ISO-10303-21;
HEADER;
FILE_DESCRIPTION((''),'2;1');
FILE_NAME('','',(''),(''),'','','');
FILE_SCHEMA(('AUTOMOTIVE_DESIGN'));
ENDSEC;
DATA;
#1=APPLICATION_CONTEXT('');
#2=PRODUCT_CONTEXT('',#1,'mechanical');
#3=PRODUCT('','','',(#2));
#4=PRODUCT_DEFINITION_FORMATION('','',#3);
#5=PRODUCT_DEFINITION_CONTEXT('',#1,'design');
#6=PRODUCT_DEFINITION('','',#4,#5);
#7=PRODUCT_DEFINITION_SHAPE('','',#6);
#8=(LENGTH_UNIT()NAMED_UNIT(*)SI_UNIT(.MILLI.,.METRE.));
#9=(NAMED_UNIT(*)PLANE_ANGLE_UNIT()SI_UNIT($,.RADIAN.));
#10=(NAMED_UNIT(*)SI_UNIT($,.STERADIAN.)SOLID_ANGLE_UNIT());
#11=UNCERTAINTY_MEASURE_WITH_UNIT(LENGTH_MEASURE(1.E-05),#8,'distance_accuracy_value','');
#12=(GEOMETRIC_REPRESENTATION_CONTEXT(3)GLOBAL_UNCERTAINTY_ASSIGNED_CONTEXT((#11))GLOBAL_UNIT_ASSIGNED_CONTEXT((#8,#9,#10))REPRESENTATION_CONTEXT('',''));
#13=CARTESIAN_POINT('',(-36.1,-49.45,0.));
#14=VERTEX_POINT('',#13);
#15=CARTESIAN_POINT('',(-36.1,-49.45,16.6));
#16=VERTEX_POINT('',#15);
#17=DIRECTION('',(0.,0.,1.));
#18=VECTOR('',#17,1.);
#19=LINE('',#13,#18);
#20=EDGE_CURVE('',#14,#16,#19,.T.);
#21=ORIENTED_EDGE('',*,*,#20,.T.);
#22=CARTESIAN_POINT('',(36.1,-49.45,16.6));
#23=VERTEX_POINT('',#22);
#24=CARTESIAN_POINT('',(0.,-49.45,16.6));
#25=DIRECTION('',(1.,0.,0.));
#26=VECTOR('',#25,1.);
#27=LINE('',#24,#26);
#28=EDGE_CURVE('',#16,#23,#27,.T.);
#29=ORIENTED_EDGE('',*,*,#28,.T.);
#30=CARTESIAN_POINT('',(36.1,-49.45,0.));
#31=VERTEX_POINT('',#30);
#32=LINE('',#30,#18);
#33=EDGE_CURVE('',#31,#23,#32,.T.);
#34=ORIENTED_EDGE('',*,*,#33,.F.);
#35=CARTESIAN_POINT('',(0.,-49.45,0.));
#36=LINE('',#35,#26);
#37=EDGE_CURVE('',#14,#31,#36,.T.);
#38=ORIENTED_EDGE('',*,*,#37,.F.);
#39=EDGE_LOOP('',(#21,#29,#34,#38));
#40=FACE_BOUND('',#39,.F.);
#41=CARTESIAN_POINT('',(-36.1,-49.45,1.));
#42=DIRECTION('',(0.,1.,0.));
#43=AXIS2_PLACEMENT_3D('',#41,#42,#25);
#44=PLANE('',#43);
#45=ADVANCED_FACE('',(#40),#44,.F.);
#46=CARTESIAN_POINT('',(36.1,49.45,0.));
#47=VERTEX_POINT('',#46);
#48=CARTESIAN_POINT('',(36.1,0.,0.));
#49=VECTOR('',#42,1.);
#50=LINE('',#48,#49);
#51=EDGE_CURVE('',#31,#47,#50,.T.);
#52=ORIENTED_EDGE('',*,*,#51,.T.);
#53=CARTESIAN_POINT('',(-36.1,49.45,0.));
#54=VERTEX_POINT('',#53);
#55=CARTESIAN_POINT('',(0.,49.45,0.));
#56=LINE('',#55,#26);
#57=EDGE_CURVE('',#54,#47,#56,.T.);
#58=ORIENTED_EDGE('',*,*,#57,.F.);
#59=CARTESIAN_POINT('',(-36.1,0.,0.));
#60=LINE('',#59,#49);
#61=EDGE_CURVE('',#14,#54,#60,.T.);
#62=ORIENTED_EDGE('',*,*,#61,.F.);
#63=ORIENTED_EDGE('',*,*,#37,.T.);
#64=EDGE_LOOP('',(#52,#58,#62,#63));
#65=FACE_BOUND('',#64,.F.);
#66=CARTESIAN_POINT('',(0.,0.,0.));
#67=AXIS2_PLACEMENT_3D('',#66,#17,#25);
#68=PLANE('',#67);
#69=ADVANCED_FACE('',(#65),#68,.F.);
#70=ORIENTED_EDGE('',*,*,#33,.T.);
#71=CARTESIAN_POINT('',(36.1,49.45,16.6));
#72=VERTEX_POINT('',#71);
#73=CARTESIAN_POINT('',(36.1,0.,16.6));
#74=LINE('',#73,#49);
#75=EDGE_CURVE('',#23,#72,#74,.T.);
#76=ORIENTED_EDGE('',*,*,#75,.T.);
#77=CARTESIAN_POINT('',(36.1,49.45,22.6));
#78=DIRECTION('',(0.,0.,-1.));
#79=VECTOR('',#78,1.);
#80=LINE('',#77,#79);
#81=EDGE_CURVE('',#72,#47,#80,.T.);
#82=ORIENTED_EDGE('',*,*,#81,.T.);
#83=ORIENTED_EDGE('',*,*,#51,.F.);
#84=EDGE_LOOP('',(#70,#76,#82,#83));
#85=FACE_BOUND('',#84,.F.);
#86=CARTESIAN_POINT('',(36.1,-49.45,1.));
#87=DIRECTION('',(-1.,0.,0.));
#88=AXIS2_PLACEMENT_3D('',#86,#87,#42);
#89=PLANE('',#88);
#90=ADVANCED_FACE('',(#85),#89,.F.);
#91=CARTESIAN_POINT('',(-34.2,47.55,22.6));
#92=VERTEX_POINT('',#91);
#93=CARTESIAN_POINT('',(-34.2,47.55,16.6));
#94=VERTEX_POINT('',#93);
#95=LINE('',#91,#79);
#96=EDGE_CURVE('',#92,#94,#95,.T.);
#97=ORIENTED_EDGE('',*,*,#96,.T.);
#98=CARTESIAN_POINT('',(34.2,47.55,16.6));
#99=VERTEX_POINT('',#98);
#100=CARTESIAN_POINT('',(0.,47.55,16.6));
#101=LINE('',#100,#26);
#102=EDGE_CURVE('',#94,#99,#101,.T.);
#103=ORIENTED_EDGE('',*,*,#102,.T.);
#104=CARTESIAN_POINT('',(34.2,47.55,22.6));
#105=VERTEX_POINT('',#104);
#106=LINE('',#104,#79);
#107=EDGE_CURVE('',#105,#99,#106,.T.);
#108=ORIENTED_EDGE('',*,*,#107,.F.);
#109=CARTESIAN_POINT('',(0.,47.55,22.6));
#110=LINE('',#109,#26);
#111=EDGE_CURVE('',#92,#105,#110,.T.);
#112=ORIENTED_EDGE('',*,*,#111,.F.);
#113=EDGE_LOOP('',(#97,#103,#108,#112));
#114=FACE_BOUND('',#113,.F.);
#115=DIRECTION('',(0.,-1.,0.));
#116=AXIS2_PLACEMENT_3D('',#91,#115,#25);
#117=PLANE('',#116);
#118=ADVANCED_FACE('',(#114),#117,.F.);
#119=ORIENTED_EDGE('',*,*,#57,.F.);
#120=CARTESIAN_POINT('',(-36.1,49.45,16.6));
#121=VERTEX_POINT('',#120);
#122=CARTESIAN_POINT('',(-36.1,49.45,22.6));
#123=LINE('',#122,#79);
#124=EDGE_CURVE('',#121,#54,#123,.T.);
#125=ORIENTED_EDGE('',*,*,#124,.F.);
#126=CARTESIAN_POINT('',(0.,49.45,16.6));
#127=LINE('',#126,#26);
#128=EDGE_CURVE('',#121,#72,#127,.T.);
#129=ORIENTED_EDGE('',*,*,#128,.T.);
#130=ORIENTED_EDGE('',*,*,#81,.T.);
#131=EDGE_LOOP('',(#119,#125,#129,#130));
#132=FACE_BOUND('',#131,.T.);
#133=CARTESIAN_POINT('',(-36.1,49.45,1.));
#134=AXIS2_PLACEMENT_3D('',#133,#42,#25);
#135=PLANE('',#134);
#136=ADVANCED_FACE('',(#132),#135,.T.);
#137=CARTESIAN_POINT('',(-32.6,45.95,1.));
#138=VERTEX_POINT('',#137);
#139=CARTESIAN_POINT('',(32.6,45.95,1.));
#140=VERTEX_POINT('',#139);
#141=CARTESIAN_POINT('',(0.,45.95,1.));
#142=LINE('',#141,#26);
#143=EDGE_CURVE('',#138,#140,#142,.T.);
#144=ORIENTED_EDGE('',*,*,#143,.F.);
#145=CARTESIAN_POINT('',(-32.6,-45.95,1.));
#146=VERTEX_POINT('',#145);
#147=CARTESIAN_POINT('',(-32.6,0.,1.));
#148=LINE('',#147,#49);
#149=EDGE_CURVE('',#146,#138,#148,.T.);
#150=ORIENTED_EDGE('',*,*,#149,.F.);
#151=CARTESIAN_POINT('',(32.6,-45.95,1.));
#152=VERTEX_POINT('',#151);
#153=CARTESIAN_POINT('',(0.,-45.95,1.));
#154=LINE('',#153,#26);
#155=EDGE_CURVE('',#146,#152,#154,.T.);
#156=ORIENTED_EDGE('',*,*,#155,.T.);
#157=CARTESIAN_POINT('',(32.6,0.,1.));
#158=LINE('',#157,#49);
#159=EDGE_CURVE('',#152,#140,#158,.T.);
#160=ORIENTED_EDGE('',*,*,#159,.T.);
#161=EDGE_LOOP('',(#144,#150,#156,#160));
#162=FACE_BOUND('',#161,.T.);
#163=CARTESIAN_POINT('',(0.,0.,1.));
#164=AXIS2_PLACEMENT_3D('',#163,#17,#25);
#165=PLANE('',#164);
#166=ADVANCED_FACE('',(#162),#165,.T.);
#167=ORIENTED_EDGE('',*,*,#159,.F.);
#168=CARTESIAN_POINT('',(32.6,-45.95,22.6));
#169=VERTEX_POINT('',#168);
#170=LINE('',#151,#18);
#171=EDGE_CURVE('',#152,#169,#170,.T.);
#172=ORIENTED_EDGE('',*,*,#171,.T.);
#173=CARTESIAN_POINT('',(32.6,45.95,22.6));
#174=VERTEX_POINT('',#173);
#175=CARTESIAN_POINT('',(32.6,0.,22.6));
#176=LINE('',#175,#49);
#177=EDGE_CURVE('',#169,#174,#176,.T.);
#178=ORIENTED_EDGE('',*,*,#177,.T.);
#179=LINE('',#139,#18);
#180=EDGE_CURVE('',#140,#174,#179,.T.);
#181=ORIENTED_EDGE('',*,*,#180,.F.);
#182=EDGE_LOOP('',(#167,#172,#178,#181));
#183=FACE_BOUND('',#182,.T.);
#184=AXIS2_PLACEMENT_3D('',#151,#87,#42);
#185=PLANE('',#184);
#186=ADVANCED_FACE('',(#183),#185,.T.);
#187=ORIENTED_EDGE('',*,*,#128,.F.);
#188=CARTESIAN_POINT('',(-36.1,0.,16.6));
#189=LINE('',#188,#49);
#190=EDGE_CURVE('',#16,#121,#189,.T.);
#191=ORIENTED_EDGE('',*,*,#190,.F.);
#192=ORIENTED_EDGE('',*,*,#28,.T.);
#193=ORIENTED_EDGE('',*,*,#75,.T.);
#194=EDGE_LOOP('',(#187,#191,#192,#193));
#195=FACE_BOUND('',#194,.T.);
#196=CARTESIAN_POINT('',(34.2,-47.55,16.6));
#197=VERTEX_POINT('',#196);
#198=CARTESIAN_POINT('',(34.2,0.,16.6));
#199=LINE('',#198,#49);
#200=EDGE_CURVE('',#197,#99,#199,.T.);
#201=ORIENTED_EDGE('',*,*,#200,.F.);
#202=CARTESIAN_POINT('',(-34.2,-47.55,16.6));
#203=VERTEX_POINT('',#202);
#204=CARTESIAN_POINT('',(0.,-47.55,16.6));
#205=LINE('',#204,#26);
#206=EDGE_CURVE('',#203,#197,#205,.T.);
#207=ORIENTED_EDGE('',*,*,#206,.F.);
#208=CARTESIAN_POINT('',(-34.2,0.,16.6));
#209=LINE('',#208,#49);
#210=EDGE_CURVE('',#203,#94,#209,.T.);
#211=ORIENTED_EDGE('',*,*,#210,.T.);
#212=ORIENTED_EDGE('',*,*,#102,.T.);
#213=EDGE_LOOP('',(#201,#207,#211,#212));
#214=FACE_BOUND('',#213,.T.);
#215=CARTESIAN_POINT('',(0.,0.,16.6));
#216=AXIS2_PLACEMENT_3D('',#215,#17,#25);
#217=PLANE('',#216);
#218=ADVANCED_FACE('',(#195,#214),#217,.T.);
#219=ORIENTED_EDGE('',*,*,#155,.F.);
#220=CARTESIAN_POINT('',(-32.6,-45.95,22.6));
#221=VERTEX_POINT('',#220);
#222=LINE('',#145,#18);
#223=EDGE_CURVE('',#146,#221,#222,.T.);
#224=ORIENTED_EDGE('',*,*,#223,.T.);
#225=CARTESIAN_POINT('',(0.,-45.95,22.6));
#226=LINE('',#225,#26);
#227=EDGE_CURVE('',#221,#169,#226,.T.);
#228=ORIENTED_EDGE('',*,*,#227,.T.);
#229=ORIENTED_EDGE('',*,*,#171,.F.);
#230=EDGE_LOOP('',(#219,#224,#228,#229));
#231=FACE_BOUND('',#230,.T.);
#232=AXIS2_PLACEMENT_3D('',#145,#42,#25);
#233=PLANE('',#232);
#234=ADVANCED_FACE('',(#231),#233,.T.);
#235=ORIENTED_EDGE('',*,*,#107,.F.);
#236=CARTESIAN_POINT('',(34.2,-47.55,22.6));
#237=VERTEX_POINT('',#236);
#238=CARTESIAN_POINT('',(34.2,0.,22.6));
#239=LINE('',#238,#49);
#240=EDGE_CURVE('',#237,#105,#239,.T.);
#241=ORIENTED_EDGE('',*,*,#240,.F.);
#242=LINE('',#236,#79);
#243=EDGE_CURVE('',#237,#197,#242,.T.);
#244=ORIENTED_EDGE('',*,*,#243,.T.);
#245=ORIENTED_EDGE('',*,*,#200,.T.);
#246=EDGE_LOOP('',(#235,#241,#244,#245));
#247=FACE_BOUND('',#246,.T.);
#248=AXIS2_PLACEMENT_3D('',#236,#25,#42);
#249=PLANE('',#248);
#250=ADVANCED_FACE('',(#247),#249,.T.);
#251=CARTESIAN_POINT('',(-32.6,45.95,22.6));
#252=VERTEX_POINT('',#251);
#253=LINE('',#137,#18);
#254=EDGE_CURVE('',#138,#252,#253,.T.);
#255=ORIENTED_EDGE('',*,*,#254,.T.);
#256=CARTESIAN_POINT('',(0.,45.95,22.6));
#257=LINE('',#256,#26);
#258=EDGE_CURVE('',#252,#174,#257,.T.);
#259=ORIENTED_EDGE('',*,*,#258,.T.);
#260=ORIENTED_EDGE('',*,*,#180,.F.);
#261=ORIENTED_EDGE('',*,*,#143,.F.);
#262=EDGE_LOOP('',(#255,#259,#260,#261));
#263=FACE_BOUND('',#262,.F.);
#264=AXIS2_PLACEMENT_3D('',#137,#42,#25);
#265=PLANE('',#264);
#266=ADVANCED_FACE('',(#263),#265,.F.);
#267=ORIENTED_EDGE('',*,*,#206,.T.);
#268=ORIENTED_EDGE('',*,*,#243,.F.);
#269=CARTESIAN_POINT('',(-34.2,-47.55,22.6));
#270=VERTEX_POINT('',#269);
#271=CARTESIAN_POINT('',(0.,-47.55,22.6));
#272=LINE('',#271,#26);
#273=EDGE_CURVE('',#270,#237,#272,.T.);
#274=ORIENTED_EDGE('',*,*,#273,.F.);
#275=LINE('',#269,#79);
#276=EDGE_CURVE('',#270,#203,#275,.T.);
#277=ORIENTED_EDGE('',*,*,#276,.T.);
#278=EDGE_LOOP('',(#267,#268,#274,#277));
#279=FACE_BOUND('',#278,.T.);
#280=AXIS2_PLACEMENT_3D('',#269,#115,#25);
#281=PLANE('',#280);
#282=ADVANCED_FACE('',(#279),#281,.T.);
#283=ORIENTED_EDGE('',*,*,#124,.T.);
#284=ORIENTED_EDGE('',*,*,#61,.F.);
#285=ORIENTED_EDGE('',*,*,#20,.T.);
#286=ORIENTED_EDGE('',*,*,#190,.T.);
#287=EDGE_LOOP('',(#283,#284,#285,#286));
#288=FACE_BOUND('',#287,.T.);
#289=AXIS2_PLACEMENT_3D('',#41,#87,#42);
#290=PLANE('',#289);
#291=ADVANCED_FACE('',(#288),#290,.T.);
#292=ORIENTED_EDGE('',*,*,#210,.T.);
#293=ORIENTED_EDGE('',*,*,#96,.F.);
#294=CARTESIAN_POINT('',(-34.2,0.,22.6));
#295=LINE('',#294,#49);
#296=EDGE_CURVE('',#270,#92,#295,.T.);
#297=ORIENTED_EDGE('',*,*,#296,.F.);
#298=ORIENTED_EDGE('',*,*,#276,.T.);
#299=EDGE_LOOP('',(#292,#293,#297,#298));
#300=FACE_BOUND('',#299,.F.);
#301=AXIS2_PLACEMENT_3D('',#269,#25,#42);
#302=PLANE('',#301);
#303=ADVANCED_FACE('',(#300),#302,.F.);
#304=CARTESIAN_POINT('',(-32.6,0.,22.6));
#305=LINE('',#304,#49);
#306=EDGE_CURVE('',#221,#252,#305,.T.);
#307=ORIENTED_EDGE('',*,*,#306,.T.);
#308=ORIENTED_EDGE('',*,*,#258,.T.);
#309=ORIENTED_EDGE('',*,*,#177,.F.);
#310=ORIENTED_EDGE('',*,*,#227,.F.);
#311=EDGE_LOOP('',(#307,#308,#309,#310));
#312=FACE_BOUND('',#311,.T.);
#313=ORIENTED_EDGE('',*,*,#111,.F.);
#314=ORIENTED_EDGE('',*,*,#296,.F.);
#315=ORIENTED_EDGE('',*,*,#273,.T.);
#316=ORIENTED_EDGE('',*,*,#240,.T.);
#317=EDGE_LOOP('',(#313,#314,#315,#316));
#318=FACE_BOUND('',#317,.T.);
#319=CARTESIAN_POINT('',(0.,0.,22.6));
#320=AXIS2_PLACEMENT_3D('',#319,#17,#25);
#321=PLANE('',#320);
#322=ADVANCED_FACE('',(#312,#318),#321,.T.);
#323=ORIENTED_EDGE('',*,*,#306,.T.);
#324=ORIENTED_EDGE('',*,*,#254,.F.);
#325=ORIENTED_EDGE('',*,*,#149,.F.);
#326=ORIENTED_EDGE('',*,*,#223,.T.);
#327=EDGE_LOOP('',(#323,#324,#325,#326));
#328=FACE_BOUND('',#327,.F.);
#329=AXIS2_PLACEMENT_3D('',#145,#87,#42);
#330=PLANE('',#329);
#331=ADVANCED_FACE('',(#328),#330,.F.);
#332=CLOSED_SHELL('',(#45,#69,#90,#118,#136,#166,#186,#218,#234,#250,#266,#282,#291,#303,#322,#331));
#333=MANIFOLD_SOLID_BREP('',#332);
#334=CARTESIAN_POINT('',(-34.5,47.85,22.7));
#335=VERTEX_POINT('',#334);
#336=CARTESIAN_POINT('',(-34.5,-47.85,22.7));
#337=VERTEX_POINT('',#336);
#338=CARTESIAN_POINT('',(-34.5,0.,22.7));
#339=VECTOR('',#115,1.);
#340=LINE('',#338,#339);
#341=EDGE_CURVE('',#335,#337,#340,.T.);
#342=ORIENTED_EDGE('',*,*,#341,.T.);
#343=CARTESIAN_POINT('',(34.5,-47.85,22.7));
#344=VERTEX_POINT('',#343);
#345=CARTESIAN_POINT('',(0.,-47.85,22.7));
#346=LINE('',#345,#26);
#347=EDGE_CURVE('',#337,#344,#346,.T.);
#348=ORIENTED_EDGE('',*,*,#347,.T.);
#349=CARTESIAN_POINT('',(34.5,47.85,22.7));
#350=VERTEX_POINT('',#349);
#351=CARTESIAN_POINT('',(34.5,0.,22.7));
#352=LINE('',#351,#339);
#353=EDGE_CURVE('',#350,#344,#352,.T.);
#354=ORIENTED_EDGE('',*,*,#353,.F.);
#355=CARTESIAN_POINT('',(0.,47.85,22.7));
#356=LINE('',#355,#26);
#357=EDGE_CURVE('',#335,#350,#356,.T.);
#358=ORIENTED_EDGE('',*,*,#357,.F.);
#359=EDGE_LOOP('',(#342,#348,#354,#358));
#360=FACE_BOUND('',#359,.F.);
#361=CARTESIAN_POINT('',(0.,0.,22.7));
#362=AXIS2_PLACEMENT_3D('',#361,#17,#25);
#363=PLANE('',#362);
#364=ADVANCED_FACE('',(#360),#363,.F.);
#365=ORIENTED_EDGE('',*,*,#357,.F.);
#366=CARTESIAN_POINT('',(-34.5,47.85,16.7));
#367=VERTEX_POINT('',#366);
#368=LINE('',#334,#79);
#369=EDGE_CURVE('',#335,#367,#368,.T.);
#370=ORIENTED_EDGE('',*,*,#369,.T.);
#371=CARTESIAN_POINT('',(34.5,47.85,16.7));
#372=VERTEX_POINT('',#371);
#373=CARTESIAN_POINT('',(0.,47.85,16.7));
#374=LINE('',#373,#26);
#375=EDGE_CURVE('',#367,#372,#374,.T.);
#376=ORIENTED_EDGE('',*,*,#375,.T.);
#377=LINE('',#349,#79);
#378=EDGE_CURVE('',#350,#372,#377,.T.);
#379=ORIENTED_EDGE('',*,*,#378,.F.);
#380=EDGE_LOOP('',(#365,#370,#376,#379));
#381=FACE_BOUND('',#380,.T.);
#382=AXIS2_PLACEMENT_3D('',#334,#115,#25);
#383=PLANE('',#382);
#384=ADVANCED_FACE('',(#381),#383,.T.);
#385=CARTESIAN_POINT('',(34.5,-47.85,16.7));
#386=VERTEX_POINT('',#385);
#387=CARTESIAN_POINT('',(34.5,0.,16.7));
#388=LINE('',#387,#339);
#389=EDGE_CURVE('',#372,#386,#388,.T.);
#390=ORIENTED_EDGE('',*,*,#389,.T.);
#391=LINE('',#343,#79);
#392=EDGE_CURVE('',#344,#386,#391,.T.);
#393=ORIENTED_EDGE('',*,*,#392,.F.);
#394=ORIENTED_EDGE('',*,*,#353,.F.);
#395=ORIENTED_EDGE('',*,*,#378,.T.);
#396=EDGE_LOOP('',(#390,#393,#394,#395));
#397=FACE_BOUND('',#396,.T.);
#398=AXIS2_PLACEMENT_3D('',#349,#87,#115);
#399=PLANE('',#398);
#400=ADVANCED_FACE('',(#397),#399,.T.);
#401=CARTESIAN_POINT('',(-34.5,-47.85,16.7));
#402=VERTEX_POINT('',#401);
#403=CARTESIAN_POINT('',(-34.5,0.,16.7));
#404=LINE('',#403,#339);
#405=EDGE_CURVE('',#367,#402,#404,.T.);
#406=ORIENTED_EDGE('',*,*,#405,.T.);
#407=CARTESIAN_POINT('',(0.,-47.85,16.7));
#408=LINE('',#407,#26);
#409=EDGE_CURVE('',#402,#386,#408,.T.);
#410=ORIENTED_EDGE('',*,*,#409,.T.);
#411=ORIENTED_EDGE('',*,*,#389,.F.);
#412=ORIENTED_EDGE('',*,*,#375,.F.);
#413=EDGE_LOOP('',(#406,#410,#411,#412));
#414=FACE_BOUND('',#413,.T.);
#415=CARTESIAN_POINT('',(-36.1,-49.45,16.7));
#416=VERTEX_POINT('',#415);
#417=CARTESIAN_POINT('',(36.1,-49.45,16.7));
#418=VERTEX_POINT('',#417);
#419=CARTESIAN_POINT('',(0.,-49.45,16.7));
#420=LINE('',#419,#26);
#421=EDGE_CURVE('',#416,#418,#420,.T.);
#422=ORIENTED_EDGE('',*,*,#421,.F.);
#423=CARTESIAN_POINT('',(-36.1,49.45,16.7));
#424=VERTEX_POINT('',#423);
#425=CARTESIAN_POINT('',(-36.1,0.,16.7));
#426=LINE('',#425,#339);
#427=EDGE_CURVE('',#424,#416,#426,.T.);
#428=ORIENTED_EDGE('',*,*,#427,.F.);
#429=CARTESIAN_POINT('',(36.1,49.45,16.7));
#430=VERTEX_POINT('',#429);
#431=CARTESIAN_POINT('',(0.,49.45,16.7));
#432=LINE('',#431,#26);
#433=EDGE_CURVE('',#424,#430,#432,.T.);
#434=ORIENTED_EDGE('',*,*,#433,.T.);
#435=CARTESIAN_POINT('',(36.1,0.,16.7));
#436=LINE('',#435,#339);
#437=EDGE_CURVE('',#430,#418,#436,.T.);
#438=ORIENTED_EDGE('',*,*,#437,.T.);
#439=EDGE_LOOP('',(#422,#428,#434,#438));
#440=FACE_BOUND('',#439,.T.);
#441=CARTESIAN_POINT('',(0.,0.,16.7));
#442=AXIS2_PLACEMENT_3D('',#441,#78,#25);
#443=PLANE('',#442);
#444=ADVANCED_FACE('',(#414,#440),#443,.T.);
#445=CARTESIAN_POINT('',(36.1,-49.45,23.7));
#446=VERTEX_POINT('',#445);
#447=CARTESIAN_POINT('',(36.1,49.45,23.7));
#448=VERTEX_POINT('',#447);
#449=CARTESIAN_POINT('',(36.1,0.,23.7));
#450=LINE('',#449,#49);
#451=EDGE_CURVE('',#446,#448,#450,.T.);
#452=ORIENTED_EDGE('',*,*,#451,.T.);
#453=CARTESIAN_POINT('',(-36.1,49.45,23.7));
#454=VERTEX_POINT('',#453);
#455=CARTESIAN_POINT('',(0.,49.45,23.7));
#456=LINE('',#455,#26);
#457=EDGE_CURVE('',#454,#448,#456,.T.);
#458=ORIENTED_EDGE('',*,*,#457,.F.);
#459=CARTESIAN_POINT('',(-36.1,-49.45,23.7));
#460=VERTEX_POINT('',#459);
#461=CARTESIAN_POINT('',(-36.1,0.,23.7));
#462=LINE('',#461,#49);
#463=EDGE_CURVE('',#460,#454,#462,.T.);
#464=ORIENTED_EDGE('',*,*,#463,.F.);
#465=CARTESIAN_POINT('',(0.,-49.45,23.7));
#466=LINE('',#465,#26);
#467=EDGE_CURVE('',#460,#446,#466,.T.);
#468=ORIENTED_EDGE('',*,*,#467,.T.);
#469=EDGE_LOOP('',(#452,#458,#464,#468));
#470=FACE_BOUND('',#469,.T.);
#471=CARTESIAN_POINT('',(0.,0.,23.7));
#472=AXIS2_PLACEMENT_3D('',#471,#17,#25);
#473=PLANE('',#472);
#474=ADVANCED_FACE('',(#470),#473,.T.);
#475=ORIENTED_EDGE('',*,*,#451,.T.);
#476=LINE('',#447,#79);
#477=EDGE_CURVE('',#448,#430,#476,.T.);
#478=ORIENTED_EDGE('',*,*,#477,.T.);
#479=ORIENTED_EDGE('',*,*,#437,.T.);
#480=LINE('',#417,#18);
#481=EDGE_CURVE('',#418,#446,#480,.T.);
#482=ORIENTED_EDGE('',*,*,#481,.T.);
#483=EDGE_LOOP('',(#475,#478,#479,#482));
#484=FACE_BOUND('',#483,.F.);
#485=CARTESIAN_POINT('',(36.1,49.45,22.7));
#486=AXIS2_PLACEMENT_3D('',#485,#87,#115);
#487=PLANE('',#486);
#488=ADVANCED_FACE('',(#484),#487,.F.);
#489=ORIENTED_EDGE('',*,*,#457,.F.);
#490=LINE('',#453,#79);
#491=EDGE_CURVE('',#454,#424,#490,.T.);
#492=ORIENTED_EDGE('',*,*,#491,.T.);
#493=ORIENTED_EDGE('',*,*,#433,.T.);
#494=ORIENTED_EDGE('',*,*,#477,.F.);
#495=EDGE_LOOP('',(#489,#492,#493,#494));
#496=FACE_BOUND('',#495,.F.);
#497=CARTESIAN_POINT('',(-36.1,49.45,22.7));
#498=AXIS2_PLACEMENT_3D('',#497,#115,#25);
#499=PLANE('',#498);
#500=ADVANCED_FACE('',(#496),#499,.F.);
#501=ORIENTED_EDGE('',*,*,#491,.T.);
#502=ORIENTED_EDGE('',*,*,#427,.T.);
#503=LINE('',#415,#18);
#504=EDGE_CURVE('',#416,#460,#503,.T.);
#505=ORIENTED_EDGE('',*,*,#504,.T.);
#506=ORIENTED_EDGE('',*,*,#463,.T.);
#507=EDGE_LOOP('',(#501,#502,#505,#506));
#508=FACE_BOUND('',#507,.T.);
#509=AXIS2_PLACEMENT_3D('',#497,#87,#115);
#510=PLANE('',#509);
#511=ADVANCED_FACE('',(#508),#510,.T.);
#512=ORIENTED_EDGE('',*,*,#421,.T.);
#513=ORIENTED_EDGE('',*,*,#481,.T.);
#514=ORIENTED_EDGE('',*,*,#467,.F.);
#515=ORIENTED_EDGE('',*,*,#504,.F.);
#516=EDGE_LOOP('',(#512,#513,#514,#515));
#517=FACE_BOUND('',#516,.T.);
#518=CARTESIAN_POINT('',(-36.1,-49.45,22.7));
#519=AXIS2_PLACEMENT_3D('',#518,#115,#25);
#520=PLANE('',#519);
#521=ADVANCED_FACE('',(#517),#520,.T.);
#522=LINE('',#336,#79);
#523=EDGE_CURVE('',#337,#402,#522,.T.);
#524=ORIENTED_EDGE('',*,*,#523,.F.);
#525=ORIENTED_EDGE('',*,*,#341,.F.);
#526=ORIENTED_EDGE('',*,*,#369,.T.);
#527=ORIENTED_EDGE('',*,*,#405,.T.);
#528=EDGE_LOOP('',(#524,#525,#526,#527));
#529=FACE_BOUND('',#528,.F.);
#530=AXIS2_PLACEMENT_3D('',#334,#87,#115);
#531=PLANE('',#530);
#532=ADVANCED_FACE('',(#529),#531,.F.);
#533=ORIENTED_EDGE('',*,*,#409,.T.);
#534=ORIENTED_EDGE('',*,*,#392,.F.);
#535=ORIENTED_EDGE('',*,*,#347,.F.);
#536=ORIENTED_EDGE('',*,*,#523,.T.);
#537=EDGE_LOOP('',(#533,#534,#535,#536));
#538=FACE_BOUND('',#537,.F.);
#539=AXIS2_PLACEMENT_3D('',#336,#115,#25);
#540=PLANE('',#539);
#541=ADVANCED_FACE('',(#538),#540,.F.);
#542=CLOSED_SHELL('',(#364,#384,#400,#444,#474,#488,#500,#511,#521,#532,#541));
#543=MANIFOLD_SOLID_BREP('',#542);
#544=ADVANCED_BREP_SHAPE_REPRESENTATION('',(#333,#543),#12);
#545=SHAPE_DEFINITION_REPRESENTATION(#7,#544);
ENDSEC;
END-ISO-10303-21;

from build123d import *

# Parameters (mm, degrees)
F3_W      = 72.2
F3_H      = 98.9
F4_DEPTH  = 1
F5_W      = 72.2
F5_H      = 98.9
F5_W_2    = 65.2
F5_H_2    = 91.9
F6_DEPTH  = 21.6
F8_W      = 72.2
F8_H      = 98.9
F8_W_2    = 68.4
F8_H_2    = 95.1
F9_DEPTH  = 6
F10_W     = 72.2
F10_H     = 98.9
F11_DEPTH = 1
F12_W     = 72.2
F12_H     = 98.9
F12_W_2   = 69
F12_H_2   = 95.7
F13_DEPTH = 6


with BuildPart() as f4:
    # F3 (on Top) → F4 (new body)
    with BuildSketch(Plane.XY):
        Rectangle(F3_W, F3_H)
    extrude(amount=F4_DEPTH)

    # F5 (on face) → F6 (join)
    with BuildSketch(Plane.XY.offset(1)):
        Rectangle(F5_W, F5_H)
        Rectangle(F5_W_2, F5_H_2, mode=Mode.SUBTRACT)
    extrude(amount=F6_DEPTH)

    # F8 (on face) → F9 (cut)
    with BuildSketch(Plane.XY.offset(22.6)):
        Rectangle(F8_W, F8_H)
        Rectangle(F8_W_2, F8_H_2, mode=Mode.SUBTRACT)
    extrude(amount=-F9_DEPTH, mode=Mode.SUBTRACT)


with BuildPart() as f11:
    # F10 (on face) → F11 (new body)
    with BuildSketch(Plane.XY.offset(22.7)):
        Rectangle(F10_W, F10_H)
    extrude(amount=F11_DEPTH)

    # F12 (on face) → F13 (join)
    with BuildSketch(Plane(origin=(0, 0, 22.7), x_dir=(1, 0, 0), z_dir=(0, 0, -1))):
        Rectangle(F12_W, F12_H)
        Rectangle(F12_W_2, F12_H_2, mode=Mode.SUBTRACT)
    extrude(amount=F13_DEPTH)


solid = Compound([f4.part, f11.part])
